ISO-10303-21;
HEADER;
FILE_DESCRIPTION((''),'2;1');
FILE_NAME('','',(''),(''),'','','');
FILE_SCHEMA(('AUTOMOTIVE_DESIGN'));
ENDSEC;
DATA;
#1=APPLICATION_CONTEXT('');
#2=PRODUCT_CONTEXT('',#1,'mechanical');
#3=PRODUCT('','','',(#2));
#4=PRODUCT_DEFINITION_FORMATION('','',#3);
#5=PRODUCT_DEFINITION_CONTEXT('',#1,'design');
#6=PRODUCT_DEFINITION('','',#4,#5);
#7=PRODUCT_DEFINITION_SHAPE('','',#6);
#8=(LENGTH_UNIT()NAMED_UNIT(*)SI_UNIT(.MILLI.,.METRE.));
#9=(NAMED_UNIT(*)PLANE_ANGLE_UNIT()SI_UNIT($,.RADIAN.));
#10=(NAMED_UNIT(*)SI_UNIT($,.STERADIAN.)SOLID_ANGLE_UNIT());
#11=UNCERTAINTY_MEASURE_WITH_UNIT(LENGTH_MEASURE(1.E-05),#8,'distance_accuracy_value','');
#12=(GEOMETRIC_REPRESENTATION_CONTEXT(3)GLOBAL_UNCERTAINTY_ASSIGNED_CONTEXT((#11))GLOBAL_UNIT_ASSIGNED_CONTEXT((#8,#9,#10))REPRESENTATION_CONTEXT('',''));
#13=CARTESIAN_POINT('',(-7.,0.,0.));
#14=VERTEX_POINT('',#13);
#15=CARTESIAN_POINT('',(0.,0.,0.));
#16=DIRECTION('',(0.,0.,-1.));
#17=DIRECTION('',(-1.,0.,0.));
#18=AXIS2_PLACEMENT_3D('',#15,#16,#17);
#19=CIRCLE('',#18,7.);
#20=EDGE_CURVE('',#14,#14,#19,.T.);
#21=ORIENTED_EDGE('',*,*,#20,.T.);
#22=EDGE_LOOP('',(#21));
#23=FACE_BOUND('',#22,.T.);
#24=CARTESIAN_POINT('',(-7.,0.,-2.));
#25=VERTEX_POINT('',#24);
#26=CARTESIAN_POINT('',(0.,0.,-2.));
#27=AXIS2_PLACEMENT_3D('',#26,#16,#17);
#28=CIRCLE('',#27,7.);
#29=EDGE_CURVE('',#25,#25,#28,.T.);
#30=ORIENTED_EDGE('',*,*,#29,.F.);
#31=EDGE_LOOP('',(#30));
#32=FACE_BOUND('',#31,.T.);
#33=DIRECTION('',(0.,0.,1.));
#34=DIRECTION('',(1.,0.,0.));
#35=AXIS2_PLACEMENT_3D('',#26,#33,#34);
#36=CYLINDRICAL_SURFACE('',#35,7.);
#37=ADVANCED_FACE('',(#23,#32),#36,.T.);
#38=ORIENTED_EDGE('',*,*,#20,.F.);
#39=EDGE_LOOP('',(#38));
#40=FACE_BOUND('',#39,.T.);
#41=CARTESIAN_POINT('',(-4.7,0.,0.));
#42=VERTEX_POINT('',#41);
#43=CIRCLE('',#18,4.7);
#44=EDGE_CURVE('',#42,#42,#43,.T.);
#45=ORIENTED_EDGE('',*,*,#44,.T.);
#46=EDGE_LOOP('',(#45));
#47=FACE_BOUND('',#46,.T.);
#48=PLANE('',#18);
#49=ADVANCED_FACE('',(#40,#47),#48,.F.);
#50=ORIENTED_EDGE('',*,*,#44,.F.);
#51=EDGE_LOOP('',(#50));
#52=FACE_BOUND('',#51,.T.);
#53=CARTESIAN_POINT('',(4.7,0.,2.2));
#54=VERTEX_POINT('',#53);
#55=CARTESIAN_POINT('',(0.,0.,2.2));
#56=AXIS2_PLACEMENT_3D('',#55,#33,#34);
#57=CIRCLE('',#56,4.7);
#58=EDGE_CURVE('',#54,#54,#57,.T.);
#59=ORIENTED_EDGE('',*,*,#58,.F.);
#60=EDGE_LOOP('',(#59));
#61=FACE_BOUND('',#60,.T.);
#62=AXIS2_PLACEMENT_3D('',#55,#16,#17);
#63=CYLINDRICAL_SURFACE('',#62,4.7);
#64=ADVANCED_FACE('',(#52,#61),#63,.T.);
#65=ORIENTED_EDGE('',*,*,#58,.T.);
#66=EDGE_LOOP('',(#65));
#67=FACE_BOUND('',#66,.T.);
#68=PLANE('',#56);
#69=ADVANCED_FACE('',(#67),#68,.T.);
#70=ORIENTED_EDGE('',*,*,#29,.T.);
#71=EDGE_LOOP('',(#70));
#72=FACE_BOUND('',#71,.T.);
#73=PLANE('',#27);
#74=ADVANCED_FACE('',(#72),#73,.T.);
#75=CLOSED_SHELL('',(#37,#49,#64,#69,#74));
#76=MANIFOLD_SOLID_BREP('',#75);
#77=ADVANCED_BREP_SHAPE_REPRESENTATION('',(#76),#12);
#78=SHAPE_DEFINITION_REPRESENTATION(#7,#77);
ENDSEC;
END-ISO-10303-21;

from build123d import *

# Parameters (mm, degrees)
SKETCH1_R           = 4.7
BOSS_EXTRUDE1_DEPTH = 2.2
BOSS_EXTRUDE2_DEPTH = 2
SKETCH3_R           = 7
BOSS_EXTRUDE3_DEPTH = 2
SPLIT1_START        = 2.2
SPLIT1_DEPTH        = 2


# Read off the part's stored shape, not the designer's step: Split1
with BuildPart() as part:
    # Sketch1 → Boss-Extrude1 (new body)
    with BuildSketch(Plane.XY):
        Circle(SKETCH1_R)
    extrude(amount=BOSS_EXTRUDE1_DEPTH)

    # Sketch3 → Boss-Extrude3 (add)
    with BuildSketch(Plane(origin=(0, 0, 0), x_dir=(-1, 0, 0), z_dir=(0, 0, -1))):
        Circle(SKETCH3_R)
    extrude(amount=BOSS_EXTRUDE3_DEPTH)


with BuildPart() as body_2:
    # Sketch2 → Boss-Extrude2 (new body)
    with BuildSketch(Plane.XY.offset(2.2)):
        with BuildLine():
            Line((-1.76, -11.3), (-0.76, -12.3))
            Line((-0.76, -12.3), (1, -12.3))
            Line((1, -12.3), (2, -11.3))
            Line((2, -11.3), (2, -8.490583019))
            ThreePointArc((2, -8.490583019), (2.470239954, -5.460125385), (3.836734694, -2.714676203))
            ThreePointArc((3.836734694, -2.714676203), (-0.065156188, 4.699548348), (-3.76, -2.82))
            ThreePointArc((-3.76, -2.82), (-2.273167019, -5.65772234), (-1.76, -8.82))
            Line((-1.76, -8.82), (-1.76, -11.3))
        make_face()
    extrude(amount=BOSS_EXTRUDE2_DEPTH)

    # Split1 outline → Split1 (cut)
    with BuildSketch(Plane.XY.offset(SPLIT1_START)):
        with BuildLine():
            ThreePointArc((3.836734694, -2.714676203), (-0.065156188, 4.699548348), (-3.76, -2.82))
            ThreePointArc((-3.76, -2.82), (-2.273167019, -5.65772234), (-1.76, -8.82))
            Line((-1.76, -8.82), (-1.76, -11.3))
            Line((-1.76, -11.3), (-0.76, -12.3))
            Line((-0.76, -12.3), (1, -12.3))
            Line((1, -12.3), (2, -11.3))
            Line((2, -11.3), (2, -8.490583019))
            ThreePointArc((2, -8.490583019), (2.470239954, -5.460125385), (3.836734694, -2.714676203))
        make_face()
    extrude(amount=SPLIT1_DEPTH, mode=Mode.SUBTRACT)


solid = part.part
